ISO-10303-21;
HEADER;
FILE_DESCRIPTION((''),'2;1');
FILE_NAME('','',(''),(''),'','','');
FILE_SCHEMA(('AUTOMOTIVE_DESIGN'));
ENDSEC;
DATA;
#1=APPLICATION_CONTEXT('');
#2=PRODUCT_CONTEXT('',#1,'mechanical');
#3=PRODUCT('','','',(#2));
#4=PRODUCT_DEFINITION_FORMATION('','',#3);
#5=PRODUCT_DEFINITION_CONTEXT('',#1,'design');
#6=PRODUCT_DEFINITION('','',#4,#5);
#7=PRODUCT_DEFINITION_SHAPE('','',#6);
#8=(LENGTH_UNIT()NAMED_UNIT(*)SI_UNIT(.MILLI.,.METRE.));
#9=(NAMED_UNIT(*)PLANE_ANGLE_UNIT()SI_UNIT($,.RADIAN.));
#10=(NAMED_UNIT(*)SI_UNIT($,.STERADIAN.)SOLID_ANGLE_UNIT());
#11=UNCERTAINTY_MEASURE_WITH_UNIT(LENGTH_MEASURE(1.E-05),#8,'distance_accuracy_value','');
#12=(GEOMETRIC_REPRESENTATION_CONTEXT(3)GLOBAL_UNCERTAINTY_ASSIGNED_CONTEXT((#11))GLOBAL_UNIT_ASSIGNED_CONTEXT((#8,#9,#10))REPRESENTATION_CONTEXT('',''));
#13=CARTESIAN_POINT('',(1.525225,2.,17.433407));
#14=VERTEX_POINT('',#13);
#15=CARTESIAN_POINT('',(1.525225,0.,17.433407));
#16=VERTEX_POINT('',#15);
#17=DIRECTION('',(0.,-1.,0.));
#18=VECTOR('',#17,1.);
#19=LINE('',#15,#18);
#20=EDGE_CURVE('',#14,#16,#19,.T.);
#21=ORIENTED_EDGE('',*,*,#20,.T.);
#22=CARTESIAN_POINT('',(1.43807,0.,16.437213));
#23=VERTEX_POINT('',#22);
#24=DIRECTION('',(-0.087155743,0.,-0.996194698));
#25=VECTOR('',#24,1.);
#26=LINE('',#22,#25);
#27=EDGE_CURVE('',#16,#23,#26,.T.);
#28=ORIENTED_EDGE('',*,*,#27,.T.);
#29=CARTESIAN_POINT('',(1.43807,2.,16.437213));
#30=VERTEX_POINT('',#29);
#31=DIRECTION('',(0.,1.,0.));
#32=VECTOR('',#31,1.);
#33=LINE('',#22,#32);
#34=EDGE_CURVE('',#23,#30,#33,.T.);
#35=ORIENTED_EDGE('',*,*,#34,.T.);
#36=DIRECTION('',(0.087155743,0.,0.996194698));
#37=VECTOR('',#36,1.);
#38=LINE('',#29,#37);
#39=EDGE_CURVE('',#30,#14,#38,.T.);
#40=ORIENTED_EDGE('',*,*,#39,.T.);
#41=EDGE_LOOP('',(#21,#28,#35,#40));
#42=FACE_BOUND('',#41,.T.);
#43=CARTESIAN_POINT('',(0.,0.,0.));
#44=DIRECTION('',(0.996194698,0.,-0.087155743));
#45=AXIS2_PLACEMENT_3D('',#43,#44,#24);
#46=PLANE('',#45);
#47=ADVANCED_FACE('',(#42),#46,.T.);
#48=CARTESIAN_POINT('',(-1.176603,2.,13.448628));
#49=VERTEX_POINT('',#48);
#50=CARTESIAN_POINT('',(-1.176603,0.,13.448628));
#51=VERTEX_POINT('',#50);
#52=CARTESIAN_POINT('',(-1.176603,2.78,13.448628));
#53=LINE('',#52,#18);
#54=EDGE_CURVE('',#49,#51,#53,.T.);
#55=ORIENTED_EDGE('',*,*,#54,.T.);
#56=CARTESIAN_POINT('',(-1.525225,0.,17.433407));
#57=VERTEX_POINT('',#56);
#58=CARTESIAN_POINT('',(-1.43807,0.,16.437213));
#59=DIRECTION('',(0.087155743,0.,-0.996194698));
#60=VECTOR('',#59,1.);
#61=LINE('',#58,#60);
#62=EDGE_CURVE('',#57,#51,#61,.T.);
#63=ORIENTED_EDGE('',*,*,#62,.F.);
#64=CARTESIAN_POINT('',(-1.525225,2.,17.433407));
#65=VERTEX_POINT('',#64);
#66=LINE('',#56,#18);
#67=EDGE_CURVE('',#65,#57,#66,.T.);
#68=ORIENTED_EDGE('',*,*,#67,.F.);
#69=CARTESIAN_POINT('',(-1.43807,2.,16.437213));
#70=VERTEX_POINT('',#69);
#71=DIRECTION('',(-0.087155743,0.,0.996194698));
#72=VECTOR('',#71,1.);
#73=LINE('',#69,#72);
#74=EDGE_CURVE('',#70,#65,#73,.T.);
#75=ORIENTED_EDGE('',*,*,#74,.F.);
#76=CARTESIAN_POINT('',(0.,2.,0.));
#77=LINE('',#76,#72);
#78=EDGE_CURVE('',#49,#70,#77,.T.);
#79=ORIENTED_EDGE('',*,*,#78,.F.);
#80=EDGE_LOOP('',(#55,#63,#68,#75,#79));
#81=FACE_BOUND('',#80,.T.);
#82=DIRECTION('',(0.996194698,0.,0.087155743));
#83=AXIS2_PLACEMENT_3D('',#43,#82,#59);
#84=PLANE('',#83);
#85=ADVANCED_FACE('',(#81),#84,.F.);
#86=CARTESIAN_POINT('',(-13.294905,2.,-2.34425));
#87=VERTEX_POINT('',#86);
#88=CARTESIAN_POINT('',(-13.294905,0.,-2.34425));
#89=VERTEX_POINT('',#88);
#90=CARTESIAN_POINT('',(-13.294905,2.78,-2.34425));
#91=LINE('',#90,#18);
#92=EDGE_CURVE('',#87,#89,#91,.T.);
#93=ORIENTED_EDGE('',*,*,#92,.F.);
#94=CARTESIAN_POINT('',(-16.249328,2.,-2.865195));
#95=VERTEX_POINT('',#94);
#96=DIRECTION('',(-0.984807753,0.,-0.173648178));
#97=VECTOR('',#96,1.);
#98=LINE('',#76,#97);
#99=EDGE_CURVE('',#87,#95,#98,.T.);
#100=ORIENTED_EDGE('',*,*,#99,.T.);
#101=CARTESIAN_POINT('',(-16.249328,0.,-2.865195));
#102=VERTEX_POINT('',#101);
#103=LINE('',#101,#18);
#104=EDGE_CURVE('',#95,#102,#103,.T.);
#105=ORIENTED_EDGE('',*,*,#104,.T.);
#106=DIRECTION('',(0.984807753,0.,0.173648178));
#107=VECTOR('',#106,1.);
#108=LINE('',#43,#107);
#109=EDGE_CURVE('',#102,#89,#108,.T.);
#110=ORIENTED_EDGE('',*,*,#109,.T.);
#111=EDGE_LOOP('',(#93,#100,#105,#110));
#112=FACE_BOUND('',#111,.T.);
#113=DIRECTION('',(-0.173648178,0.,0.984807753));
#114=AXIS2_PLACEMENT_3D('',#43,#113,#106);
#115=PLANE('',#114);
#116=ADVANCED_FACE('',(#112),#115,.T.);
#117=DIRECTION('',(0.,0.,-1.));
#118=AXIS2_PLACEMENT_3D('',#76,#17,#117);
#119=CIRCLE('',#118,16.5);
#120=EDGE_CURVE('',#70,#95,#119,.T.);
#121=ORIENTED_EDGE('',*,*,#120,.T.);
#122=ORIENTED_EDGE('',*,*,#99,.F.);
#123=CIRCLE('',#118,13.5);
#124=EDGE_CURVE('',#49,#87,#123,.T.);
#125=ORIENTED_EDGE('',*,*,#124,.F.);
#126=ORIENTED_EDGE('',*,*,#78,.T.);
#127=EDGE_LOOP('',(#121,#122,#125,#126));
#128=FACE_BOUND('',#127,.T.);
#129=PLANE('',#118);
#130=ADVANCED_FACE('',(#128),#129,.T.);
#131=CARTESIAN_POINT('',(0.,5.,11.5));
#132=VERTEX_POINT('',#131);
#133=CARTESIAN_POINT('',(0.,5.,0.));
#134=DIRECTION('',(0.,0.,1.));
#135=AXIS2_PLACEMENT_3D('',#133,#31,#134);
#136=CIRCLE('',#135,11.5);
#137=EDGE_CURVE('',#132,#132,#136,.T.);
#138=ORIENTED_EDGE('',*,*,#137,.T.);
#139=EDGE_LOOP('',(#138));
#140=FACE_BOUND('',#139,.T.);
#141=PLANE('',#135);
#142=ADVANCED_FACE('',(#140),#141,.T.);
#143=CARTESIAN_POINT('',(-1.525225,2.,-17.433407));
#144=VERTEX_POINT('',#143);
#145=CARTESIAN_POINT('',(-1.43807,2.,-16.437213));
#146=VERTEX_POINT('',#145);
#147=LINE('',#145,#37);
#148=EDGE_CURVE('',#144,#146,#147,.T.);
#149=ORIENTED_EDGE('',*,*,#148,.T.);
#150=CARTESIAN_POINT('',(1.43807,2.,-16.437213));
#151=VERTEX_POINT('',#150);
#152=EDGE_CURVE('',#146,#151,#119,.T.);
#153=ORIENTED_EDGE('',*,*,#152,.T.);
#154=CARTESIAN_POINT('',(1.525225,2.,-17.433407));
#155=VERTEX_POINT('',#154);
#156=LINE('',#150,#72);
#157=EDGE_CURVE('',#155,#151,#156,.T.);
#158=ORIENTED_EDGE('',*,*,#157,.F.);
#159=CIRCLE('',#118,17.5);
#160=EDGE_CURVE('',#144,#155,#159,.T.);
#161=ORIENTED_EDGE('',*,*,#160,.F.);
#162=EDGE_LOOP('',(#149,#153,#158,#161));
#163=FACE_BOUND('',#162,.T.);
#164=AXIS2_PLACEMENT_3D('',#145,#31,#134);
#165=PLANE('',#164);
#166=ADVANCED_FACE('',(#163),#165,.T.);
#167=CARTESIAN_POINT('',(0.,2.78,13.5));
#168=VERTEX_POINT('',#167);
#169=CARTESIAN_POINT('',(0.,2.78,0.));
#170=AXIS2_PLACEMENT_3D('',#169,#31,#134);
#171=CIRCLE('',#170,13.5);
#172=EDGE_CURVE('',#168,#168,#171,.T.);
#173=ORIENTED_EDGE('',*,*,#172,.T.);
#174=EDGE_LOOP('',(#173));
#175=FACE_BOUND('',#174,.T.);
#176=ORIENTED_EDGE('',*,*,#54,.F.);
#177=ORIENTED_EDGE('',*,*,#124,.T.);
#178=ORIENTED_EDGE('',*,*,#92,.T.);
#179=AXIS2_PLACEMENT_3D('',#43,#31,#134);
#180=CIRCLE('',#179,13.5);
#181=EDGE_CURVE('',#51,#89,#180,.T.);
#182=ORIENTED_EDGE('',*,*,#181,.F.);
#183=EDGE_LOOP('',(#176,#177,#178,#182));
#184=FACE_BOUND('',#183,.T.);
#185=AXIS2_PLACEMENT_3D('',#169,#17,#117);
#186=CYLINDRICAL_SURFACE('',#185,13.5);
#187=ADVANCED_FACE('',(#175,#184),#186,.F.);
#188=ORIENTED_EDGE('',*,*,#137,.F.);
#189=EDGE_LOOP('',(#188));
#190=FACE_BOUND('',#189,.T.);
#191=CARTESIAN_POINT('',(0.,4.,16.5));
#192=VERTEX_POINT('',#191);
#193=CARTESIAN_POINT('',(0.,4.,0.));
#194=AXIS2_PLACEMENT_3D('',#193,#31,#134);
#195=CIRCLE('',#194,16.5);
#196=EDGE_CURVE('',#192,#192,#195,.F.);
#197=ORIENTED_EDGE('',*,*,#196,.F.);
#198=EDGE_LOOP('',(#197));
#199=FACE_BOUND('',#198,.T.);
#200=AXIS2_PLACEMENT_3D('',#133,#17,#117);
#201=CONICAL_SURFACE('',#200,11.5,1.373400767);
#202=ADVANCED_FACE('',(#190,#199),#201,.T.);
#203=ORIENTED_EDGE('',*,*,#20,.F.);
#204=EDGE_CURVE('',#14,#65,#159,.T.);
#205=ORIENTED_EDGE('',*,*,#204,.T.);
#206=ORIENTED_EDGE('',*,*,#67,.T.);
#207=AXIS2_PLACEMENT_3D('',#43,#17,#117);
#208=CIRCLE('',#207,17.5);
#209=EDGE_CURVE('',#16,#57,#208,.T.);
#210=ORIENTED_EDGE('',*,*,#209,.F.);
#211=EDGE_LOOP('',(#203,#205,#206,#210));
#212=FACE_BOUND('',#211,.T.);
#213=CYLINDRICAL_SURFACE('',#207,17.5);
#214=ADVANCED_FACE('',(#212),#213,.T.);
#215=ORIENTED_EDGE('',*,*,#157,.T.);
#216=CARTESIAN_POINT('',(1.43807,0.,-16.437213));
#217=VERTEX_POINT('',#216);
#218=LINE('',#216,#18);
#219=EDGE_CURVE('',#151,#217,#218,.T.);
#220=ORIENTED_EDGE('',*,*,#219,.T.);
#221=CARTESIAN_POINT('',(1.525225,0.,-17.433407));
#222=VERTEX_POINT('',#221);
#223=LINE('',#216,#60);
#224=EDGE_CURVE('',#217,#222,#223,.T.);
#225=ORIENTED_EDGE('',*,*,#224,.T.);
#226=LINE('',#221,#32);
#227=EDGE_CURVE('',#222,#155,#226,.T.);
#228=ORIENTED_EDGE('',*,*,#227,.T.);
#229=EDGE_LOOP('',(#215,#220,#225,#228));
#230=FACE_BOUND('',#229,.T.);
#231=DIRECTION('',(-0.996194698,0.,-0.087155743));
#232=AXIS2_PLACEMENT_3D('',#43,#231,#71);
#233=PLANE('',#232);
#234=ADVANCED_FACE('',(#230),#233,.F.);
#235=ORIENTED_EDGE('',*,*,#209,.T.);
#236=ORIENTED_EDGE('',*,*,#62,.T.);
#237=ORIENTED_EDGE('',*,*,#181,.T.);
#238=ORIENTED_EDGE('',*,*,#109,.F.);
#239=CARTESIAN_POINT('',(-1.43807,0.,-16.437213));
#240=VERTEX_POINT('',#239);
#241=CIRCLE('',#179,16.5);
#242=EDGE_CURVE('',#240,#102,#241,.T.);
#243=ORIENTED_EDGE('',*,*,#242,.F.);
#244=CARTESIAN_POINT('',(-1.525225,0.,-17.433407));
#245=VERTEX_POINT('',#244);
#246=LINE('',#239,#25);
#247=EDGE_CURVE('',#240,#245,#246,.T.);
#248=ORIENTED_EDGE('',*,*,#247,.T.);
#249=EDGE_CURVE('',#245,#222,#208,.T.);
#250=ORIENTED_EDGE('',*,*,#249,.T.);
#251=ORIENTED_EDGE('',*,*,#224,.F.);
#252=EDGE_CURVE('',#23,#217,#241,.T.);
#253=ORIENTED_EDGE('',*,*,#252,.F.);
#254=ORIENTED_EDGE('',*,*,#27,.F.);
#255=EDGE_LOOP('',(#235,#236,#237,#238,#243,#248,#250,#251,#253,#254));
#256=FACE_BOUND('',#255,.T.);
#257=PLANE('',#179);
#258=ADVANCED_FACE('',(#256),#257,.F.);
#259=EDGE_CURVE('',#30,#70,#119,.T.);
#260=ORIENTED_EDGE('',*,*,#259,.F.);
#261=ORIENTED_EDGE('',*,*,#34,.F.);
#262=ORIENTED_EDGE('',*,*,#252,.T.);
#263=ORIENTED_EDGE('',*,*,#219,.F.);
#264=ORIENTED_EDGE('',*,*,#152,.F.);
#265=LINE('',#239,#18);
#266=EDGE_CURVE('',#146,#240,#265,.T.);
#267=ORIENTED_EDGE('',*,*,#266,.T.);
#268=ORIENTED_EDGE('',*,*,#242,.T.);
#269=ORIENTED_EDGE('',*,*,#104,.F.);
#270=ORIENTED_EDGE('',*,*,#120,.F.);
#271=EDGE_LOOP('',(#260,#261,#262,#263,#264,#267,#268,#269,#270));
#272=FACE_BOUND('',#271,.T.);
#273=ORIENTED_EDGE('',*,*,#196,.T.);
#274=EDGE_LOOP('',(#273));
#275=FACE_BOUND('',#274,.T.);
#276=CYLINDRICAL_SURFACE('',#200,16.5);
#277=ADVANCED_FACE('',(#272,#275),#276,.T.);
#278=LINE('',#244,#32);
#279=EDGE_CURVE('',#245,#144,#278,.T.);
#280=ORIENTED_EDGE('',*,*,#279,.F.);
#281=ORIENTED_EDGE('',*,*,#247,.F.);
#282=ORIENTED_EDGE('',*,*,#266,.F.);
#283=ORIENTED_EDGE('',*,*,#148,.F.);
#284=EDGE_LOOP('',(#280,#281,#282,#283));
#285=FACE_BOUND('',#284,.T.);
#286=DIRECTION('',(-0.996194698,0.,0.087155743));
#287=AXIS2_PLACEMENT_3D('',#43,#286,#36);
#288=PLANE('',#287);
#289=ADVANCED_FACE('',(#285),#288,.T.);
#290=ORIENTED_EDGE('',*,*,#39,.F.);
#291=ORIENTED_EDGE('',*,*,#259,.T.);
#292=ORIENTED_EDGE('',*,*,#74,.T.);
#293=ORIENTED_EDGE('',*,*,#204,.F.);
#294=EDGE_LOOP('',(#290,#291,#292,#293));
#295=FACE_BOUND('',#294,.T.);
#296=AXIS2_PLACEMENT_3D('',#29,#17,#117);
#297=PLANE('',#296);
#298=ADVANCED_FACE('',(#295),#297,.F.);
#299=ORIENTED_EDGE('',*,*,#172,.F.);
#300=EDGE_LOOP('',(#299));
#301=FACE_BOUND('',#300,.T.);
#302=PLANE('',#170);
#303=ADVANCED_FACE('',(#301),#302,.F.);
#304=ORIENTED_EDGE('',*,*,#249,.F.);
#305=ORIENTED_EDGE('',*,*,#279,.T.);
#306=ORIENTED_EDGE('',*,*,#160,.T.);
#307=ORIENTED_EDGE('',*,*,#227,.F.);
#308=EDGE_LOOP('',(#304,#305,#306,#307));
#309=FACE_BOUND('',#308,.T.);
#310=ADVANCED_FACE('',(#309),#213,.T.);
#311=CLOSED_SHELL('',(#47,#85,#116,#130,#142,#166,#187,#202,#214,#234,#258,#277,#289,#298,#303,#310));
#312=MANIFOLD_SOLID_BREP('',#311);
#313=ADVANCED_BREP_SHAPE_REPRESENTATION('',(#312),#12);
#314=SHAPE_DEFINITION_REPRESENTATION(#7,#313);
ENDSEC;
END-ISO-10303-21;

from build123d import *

# Parameters (mm, degrees)
SKETCH1_R                    = 16.5
BOSS_EXTRUDE1_DEPTH          = 5
CHAMFER2_SIZE                = 1
CHAMFER2_SIZE2               = 5
SKETCH3_R                    = 13.5
CUT_EXTRUDE1_DEPTH           = 2.78
SKETCH5_W                    = 1
SKETCH5_H                    = 2
REVOLVE4_ANGLE               = 5
REVOLVE4_OTHER_WAY_ANGLE     = 5
REVOLVE6_DEPTH               = 2
SKETCH9_W                    = 16.5
SKETCH9_H                    = 2
CUT_REVOLVE1_ANGLE           = 85
CUT_REVOLVE1_OTHER_WAY_ANGLE = 10


# Read off the part's stored shape, not the designer's step: Revolve6
with BuildPart() as part:
    # Sketch1 → Boss-Extrude1 (new body)
    with BuildSketch(Plane(origin=(0, 0, 0), x_dir=(1, 0, 0), z_dir=(0, 1, 0))):
        with Locations(Location((0, 0, 0), (0, 0, 270))):
            Circle(SKETCH1_R)
    extrude(amount=BOSS_EXTRUDE1_DEPTH)

    # Chamfer2
    chamfer2_edges = [part.edges().sort_by_distance(p)[0] for p in [
        (0, 5, -16.5),
    ]]
    chamfer2_side = [part.faces().sort_by_distance(p)[0] for p in [
        (0, 2.5, -16.5),
    ]]
    chamfer(chamfer2_edges, length=CHAMFER2_SIZE, length2=CHAMFER2_SIZE2, reference=chamfer2_side[0])

    # Sketch3 → Cut-Extrude1 (cut)
    with BuildSketch(Plane(origin=(0, 0, 0), x_dir=(1, 0, 0), z_dir=(0, 1, 0))):
        with Locations(Location((0, 0, 0), (0, 0, 270))):
            Circle(SKETCH3_R)
    extrude(amount=CUT_EXTRUDE1_DEPTH, mode=Mode.SUBTRACT)

    # Sketch5 → Revolve4 (revolve)
    with BuildSketch(Plane(origin=(0, 0, 0), x_dir=(0, 0, -1), z_dir=(1, 0, 0))):
        with Locations((17, 1)):
            Rectangle(SKETCH5_W, SKETCH5_H)
    revolve(axis=Axis((0, 0, 0), (0, 1, 0)), revolution_arc=REVOLVE4_ANGLE)

    # Sketch5 → Revolve4 other way (revolve)
    with BuildSketch(Plane(origin=(0, 0, 0), x_dir=(0, 0, -1), z_dir=(1, 0, 0))):
        with Locations((17, 1)):
            Rectangle(SKETCH5_W, SKETCH5_H)
    revolve(axis=Axis((0, 0, 0), (0, -1, 0)), revolution_arc=REVOLVE4_OTHER_WAY_ANGLE)

    # Revolve6 outline → Revolve6 (add)
    with BuildSketch(Plane(origin=(0, 0, 0), x_dir=(1, 0, 0), z_dir=(0, 1, 0))):
        with BuildLine():
            ThreePointArc((-1.525225498, -17.433407217), (0, -17.5), (1.525225498, -17.433407217))
            Line((1.525225498, -17.433407217), (1.438069755, -16.437212519))
            ThreePointArc((1.438069755, -16.437212519), (0, -16.5), (-1.438069755, -16.437212519))
            Line((-1.438069755, -16.437212519), (-1.525225498, -17.433407217))
        make_face()
    extrude(amount=REVOLVE6_DEPTH)

    # Sketch9 → Cut-Revolve1 (revolve, cut)
    with BuildSketch(Plane.XY):
        with Locations((-8.25, 1)):
            Rectangle(SKETCH9_W, SKETCH9_H)
    revolve(axis=Axis((0, 0, 0), (0, 1, 0)), revolution_arc=CUT_REVOLVE1_ANGLE, mode=Mode.SUBTRACT)

    # Sketch9 → Cut-Revolve1 other way (revolve, cut)
    with BuildSketch(Plane.XY):
        with Locations((-8.25, 1)):
            Rectangle(SKETCH9_W, SKETCH9_H)
    revolve(axis=Axis((0, 0, 0), (0, -1, 0)), revolution_arc=CUT_REVOLVE1_OTHER_WAY_ANGLE, mode=Mode.SUBTRACT)


solid = part.part
